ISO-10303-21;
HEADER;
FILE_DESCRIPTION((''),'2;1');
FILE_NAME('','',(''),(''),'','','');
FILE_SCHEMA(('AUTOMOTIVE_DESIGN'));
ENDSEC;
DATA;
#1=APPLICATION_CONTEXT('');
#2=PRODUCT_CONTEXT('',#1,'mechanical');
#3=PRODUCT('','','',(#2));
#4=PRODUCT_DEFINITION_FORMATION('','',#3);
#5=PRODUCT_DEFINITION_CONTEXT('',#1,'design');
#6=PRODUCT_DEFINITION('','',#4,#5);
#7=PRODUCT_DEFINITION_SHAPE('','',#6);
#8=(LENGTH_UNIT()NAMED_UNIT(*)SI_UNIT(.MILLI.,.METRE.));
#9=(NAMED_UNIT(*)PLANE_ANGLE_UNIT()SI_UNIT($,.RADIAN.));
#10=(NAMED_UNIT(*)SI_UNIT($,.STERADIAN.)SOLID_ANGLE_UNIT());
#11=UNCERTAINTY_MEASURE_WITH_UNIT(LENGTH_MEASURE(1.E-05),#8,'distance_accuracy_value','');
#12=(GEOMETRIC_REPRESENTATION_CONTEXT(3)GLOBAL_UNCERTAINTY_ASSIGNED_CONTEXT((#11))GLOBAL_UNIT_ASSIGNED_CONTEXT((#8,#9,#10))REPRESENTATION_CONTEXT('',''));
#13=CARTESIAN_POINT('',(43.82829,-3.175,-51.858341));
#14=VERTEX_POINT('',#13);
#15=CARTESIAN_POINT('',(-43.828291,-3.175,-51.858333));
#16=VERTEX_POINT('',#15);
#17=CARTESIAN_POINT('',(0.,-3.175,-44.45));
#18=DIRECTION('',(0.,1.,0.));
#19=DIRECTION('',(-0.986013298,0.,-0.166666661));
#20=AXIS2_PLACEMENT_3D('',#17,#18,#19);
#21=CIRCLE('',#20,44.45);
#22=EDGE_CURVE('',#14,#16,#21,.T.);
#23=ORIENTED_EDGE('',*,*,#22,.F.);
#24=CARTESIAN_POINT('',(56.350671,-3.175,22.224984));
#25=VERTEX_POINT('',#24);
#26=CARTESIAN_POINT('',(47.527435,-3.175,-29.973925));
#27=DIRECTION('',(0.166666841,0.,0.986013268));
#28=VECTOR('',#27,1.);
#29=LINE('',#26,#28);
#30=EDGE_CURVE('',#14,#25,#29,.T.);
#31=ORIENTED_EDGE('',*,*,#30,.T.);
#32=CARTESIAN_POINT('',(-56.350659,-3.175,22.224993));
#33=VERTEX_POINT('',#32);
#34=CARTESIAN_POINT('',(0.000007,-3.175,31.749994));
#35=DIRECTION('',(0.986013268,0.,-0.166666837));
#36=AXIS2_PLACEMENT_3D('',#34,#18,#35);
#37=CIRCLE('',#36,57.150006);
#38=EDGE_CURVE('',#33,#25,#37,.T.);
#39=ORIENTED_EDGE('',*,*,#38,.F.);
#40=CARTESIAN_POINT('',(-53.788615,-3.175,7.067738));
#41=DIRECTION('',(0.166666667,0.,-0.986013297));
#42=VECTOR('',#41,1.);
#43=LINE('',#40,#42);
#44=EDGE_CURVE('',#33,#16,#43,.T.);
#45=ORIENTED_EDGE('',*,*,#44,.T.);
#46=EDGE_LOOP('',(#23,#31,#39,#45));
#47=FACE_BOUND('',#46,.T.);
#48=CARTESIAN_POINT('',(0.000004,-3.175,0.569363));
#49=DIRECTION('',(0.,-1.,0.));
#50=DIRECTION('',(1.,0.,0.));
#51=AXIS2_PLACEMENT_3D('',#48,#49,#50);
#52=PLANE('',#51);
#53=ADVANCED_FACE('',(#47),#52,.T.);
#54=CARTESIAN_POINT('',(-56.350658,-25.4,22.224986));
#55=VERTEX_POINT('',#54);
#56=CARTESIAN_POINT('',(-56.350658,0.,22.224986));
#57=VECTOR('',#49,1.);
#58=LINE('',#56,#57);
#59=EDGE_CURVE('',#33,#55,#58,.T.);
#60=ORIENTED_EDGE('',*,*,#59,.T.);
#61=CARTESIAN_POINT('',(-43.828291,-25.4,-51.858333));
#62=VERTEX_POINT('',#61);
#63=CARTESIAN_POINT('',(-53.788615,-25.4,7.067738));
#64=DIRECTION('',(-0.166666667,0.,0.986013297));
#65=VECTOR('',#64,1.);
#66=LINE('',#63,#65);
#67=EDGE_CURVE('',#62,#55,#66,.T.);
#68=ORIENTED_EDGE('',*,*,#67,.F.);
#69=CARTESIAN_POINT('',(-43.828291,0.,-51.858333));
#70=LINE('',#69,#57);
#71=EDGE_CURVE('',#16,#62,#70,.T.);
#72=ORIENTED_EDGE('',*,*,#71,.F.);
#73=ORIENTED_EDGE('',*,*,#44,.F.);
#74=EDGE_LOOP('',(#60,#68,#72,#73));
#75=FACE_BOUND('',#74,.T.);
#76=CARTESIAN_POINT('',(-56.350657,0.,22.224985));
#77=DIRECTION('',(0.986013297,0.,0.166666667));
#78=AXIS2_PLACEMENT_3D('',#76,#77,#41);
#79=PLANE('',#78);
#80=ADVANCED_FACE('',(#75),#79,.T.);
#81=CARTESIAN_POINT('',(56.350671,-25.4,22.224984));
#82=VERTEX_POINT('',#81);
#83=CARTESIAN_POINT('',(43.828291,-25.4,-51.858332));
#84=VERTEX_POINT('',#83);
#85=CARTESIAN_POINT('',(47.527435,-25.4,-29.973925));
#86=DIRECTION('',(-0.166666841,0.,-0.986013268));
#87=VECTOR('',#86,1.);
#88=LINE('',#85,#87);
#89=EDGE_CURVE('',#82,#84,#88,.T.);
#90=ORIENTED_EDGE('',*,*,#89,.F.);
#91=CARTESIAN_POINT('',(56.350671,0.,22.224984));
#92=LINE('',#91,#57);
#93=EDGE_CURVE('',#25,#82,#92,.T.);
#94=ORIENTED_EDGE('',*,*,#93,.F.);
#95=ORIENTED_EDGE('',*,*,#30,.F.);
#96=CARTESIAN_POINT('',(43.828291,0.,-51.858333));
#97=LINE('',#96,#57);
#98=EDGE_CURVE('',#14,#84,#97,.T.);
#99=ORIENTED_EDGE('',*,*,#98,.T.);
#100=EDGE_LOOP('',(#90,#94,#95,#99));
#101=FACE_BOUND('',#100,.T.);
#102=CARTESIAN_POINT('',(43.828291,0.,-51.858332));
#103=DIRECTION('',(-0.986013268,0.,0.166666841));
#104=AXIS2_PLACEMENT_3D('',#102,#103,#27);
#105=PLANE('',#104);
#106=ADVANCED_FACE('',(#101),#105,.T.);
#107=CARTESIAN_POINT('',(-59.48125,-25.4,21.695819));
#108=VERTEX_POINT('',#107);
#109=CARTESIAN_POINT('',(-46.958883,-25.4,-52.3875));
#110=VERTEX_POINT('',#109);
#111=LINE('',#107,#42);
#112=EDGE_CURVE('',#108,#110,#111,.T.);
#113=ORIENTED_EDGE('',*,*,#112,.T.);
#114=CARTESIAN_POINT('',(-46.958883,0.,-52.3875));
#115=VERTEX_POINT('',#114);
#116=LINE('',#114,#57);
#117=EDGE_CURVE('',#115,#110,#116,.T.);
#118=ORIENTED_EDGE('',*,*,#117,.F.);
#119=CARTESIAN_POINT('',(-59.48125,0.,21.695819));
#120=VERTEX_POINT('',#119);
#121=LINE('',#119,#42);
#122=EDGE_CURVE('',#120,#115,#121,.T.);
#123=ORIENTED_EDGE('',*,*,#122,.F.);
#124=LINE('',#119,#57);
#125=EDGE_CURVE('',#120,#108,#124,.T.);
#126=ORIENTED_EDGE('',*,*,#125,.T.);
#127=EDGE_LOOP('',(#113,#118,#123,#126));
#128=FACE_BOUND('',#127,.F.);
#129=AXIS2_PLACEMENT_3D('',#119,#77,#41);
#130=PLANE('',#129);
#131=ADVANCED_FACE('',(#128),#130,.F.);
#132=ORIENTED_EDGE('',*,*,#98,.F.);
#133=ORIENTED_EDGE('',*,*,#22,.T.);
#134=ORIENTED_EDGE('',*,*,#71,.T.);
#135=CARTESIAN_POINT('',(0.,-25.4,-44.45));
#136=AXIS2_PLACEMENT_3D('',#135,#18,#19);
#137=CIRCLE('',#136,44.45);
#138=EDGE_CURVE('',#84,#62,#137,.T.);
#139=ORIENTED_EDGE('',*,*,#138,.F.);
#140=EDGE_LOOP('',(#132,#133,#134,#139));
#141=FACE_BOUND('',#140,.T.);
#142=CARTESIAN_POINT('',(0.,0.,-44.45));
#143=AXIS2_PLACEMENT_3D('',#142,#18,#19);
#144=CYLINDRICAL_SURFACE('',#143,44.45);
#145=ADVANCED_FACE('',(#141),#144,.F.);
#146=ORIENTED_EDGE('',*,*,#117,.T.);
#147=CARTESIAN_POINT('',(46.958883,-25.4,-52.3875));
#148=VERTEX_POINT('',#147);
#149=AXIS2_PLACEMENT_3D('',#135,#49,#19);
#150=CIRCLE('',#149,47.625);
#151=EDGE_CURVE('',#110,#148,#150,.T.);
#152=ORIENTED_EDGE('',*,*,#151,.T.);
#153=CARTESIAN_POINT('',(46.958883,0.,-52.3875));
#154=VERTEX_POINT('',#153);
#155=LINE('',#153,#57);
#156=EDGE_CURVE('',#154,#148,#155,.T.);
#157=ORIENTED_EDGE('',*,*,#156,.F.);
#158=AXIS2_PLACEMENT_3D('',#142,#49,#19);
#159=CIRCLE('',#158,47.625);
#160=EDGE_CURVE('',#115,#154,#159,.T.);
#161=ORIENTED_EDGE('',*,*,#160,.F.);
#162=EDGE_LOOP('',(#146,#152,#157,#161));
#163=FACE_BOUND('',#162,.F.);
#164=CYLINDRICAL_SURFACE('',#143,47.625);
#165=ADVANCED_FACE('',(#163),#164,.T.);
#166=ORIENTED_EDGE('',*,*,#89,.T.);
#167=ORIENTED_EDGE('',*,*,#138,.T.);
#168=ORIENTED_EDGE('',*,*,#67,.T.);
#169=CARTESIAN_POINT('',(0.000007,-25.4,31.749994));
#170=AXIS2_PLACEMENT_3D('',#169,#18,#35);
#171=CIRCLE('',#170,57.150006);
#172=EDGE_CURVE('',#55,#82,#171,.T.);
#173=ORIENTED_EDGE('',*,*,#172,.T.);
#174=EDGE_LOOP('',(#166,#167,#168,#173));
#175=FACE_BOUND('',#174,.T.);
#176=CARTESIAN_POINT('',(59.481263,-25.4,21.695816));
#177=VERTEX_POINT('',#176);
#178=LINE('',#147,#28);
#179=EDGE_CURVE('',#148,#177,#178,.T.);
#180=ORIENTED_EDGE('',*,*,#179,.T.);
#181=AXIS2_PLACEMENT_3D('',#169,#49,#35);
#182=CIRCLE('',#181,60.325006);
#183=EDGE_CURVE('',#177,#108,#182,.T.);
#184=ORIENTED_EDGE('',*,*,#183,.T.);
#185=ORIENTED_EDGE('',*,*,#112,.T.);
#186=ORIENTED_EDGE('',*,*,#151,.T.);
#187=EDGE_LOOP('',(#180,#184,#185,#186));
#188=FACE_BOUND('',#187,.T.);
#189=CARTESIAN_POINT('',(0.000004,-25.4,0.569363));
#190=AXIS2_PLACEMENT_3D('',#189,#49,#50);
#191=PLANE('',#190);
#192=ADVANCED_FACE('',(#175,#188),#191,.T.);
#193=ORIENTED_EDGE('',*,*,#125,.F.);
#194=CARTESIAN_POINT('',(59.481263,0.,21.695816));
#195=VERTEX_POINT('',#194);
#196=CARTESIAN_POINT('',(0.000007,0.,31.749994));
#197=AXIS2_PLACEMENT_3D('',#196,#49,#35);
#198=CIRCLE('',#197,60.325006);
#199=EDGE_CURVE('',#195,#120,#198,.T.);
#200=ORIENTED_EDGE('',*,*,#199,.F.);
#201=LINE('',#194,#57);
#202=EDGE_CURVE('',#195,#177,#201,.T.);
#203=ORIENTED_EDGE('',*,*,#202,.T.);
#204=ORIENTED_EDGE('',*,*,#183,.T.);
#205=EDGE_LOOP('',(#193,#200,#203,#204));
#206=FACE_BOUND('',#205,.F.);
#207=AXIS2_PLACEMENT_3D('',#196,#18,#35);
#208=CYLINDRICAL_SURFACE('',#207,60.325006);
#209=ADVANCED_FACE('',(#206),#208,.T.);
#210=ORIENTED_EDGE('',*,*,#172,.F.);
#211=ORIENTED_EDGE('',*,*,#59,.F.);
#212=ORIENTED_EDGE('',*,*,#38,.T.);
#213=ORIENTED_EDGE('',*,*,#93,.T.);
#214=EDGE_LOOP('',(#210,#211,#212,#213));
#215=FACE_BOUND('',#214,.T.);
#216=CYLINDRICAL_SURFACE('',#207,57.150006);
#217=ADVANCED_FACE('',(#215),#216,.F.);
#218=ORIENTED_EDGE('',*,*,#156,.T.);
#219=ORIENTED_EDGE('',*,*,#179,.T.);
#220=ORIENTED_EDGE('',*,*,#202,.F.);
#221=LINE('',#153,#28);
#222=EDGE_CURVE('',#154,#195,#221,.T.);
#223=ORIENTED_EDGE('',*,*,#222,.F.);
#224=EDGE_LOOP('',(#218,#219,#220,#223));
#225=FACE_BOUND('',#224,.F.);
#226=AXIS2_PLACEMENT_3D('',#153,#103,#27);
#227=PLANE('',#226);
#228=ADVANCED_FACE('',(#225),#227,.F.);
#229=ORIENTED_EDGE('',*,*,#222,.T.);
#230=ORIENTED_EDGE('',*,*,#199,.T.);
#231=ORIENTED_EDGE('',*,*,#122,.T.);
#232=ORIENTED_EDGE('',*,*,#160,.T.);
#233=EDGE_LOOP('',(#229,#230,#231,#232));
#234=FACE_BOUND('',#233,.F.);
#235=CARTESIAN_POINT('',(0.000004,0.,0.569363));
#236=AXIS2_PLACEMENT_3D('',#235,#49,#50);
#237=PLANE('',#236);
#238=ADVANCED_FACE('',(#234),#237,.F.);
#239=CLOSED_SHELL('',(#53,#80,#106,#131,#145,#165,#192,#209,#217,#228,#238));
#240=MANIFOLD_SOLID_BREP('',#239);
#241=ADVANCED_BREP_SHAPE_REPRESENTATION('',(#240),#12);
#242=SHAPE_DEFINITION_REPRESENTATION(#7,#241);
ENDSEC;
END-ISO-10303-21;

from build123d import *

# Parameters (mm, degrees)
F1_DEPTH = 25.4
F2_T     = -3.175


# Not quite as in the source:
# - ends of sketch curves that miss each other by under 0.0002 mm in the source are joined


with BuildPart() as f1:
    # F0 (on Front) → F1 (new body)
    with BuildSketch(Plane.XZ):
        with BuildLine():
            ThreePointArc((-46.9588833262, -52.3874997171), (0, -92.075), (46.9588833262, -52.3874997171))
            Line((46.9588833262, -52.3874997171), (59.4812628, 21.6958164))
            ThreePointArc((59.4812628, 21.6958164), (0, 92.075), (-59.4812496656, 21.6958186201))
            Line((-59.4812496656, 21.6958186201), (-46.9588833262, -52.3874997171))
        make_face()
    extrude(amount=F1_DEPTH)

    # F2
    f2_openings = [f1.faces().sort_by_distance(p)[0] for p in [
        (4e-06, -25.4, 3.213538),
    ]]
    offset(amount=F2_T, openings=f2_openings, kind=Kind.INTERSECTION)


solid = f1.part
